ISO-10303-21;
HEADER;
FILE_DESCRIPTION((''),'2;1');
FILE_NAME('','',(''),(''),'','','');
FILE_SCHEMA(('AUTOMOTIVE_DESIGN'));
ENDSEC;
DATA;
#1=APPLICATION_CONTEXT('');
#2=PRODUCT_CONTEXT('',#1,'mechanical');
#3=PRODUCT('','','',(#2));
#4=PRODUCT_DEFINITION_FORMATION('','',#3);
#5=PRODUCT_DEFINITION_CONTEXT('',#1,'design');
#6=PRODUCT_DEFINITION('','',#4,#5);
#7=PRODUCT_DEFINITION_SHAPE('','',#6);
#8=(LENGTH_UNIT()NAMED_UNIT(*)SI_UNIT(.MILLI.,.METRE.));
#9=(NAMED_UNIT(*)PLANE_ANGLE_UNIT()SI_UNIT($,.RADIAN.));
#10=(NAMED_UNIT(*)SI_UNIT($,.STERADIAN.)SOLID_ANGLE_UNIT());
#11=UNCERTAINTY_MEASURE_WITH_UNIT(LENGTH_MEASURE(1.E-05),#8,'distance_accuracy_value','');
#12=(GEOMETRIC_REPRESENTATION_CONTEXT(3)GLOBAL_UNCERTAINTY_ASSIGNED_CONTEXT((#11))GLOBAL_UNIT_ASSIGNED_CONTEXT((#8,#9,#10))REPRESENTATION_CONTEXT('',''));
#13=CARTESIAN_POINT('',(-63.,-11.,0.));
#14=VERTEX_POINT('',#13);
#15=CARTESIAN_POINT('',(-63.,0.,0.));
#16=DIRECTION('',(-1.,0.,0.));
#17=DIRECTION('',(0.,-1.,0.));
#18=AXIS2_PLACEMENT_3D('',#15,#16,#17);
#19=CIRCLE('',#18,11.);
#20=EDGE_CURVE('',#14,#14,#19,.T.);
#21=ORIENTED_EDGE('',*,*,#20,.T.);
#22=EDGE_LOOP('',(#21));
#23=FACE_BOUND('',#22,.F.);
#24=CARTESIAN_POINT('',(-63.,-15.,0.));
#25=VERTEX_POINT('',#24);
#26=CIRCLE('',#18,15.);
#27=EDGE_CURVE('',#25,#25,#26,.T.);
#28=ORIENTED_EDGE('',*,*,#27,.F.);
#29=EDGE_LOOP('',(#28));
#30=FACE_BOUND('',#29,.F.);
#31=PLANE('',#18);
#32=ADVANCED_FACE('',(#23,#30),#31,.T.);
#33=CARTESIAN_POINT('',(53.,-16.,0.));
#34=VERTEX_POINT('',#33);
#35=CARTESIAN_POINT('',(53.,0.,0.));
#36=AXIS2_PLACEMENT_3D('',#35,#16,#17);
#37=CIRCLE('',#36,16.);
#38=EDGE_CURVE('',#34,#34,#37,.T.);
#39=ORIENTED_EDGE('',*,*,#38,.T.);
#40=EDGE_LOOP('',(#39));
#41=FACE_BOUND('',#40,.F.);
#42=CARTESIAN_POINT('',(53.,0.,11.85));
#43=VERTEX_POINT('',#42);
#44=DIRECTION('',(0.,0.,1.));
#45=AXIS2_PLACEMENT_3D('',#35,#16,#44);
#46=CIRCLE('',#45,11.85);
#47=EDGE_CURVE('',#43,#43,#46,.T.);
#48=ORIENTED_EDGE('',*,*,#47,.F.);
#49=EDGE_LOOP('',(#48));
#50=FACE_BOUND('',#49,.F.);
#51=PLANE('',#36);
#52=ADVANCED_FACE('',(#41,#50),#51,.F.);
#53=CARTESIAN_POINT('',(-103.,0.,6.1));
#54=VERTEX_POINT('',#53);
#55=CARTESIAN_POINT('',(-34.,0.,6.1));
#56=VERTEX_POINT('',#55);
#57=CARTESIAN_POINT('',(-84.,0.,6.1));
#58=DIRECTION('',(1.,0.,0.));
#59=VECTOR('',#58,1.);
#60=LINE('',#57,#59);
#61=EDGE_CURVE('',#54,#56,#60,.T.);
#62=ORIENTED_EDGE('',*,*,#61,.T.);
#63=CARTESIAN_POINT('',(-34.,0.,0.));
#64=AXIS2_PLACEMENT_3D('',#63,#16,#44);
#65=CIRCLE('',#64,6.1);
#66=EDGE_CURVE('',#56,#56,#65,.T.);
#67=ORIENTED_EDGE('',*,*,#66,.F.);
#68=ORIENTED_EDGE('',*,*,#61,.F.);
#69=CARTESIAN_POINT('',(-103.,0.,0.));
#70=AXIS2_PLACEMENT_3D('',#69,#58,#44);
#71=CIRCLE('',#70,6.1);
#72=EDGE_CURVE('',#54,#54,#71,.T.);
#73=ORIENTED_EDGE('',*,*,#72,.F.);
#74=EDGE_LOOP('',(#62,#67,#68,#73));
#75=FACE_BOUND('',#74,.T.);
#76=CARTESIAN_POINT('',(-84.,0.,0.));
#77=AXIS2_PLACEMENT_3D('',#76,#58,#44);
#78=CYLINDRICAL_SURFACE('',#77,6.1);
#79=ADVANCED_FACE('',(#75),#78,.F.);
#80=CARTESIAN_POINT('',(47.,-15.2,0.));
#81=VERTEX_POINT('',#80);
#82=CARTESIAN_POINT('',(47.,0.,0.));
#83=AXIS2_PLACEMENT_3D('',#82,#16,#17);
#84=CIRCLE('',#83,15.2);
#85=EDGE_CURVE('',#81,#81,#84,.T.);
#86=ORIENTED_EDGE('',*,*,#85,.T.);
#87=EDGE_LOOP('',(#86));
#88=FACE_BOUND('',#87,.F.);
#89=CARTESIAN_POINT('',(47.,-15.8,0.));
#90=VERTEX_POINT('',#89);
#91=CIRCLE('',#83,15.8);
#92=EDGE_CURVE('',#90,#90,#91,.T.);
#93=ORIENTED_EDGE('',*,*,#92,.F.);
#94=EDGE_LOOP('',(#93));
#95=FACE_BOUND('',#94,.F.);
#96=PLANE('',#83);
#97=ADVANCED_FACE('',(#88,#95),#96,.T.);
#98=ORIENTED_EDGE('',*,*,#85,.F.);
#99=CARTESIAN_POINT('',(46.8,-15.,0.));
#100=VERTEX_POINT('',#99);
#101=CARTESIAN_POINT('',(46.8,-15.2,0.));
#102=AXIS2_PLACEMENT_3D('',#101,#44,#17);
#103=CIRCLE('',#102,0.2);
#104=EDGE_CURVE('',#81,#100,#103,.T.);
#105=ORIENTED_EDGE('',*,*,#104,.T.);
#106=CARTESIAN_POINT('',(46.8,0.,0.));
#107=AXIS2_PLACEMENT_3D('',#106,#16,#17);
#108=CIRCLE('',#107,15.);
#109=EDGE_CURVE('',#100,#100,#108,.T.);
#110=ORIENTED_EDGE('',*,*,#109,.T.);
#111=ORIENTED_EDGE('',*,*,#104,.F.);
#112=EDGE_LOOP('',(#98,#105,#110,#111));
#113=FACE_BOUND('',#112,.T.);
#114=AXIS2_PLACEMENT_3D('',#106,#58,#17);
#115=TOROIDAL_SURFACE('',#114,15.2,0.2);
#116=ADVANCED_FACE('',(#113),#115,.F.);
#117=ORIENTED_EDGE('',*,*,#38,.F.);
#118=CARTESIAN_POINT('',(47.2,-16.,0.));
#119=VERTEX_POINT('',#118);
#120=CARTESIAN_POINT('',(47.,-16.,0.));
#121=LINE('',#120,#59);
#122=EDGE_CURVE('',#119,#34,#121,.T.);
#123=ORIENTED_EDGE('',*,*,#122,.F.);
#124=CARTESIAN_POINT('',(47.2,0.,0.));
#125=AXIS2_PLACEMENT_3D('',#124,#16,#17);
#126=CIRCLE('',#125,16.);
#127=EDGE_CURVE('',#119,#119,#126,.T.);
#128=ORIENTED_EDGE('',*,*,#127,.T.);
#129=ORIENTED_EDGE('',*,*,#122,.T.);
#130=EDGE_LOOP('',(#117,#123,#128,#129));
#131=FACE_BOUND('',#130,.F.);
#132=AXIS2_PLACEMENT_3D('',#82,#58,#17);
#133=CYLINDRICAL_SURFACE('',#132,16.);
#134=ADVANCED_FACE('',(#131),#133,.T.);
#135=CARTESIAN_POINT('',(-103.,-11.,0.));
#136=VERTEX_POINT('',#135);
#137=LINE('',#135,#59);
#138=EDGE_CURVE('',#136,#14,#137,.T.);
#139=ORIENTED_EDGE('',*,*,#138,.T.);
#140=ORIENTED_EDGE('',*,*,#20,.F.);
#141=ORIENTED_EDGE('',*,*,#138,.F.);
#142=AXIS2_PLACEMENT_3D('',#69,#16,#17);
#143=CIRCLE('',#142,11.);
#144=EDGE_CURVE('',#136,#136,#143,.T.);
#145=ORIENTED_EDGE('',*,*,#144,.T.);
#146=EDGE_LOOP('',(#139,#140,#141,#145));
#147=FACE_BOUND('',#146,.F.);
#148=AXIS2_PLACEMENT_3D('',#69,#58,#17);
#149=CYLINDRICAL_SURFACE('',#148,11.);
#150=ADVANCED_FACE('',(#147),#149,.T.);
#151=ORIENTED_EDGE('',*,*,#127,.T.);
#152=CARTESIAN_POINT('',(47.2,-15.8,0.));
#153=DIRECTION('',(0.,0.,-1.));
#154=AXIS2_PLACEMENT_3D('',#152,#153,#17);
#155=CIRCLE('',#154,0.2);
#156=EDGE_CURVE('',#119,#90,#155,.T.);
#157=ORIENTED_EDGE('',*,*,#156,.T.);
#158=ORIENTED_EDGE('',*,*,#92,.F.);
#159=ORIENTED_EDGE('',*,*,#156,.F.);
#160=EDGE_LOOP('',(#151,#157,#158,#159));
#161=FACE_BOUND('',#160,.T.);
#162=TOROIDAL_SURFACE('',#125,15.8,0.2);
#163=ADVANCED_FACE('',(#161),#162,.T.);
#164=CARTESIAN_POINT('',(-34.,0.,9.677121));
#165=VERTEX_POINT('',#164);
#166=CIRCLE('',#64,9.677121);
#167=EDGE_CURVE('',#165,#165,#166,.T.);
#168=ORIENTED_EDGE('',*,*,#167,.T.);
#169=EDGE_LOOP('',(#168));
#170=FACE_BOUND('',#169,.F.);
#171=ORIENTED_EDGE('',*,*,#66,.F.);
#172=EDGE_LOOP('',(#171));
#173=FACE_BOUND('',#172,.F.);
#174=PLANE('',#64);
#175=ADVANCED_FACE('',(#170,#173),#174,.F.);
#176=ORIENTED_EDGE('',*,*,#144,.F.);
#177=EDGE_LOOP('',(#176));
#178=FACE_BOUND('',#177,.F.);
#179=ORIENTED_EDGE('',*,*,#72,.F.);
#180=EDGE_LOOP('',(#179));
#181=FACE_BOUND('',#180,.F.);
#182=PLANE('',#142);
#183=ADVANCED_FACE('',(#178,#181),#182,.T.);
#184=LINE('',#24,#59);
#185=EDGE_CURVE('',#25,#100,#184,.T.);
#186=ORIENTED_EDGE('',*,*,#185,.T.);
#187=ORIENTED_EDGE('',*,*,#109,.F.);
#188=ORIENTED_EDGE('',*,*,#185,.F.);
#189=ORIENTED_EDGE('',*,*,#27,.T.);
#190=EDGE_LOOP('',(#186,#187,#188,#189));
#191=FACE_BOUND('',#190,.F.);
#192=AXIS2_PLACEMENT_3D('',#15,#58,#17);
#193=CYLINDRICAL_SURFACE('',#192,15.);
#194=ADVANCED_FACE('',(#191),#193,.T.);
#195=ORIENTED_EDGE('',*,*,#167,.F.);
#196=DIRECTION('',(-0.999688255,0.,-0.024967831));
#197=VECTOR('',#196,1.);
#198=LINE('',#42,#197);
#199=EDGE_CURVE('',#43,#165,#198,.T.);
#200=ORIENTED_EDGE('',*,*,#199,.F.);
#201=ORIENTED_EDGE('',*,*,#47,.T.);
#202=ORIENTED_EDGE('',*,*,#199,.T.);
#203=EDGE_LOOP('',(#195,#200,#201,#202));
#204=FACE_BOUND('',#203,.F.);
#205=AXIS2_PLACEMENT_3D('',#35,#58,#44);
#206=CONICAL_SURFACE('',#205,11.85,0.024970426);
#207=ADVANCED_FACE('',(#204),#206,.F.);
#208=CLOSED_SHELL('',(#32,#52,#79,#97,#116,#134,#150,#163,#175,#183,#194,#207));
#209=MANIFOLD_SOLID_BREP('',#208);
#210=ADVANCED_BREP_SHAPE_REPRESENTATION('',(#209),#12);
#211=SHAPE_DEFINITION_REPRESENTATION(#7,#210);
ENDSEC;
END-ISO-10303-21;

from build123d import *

# Parameters (mm, degrees)
F2_W = 100
F2_H = 6.1
F5_R = 0.2


# Not quite as in the source:
# - a feature of the source that left no trace in its solid (it failed there, or was rolled back) is left out


with BuildPart() as f1:
    # F0 (on Top) → F1 (revolve)
    with BuildSketch(Plane.XY):
        Polygon((53, -16), (53, 0), (47, 0), (0, 0), (-103, 0), (-103, -11), (-63, -11), (-63, -15), (47, -15), (47, -16), align=None)
    revolve(axis=Axis((-51.5, 0, 0), (-1, 0, 0)))

    # F2 (on Front) → F3 (revolve, cut)
    with BuildSketch(Plane.XZ):
        Polygon((53, 11.85), (-34, 9.6771213406), (-34, 6.1), (-34, 0), (0, 0), (53, 0), align=None)
        with Locations((-84, 3.05)):
            Rectangle(F2_W, F2_H)
    revolve(axis=Axis((26.5, 0, 0), (-1, 0, 0)), mode=Mode.SUBTRACT)

    # F5
    f5_edges = [f1.edges().sort_by_distance(p)[0] for p in [
        (47, 16, 0),
        (47, 15, 0),
    ]]
    fillet(f5_edges, radius=F5_R)


solid = f1.part
